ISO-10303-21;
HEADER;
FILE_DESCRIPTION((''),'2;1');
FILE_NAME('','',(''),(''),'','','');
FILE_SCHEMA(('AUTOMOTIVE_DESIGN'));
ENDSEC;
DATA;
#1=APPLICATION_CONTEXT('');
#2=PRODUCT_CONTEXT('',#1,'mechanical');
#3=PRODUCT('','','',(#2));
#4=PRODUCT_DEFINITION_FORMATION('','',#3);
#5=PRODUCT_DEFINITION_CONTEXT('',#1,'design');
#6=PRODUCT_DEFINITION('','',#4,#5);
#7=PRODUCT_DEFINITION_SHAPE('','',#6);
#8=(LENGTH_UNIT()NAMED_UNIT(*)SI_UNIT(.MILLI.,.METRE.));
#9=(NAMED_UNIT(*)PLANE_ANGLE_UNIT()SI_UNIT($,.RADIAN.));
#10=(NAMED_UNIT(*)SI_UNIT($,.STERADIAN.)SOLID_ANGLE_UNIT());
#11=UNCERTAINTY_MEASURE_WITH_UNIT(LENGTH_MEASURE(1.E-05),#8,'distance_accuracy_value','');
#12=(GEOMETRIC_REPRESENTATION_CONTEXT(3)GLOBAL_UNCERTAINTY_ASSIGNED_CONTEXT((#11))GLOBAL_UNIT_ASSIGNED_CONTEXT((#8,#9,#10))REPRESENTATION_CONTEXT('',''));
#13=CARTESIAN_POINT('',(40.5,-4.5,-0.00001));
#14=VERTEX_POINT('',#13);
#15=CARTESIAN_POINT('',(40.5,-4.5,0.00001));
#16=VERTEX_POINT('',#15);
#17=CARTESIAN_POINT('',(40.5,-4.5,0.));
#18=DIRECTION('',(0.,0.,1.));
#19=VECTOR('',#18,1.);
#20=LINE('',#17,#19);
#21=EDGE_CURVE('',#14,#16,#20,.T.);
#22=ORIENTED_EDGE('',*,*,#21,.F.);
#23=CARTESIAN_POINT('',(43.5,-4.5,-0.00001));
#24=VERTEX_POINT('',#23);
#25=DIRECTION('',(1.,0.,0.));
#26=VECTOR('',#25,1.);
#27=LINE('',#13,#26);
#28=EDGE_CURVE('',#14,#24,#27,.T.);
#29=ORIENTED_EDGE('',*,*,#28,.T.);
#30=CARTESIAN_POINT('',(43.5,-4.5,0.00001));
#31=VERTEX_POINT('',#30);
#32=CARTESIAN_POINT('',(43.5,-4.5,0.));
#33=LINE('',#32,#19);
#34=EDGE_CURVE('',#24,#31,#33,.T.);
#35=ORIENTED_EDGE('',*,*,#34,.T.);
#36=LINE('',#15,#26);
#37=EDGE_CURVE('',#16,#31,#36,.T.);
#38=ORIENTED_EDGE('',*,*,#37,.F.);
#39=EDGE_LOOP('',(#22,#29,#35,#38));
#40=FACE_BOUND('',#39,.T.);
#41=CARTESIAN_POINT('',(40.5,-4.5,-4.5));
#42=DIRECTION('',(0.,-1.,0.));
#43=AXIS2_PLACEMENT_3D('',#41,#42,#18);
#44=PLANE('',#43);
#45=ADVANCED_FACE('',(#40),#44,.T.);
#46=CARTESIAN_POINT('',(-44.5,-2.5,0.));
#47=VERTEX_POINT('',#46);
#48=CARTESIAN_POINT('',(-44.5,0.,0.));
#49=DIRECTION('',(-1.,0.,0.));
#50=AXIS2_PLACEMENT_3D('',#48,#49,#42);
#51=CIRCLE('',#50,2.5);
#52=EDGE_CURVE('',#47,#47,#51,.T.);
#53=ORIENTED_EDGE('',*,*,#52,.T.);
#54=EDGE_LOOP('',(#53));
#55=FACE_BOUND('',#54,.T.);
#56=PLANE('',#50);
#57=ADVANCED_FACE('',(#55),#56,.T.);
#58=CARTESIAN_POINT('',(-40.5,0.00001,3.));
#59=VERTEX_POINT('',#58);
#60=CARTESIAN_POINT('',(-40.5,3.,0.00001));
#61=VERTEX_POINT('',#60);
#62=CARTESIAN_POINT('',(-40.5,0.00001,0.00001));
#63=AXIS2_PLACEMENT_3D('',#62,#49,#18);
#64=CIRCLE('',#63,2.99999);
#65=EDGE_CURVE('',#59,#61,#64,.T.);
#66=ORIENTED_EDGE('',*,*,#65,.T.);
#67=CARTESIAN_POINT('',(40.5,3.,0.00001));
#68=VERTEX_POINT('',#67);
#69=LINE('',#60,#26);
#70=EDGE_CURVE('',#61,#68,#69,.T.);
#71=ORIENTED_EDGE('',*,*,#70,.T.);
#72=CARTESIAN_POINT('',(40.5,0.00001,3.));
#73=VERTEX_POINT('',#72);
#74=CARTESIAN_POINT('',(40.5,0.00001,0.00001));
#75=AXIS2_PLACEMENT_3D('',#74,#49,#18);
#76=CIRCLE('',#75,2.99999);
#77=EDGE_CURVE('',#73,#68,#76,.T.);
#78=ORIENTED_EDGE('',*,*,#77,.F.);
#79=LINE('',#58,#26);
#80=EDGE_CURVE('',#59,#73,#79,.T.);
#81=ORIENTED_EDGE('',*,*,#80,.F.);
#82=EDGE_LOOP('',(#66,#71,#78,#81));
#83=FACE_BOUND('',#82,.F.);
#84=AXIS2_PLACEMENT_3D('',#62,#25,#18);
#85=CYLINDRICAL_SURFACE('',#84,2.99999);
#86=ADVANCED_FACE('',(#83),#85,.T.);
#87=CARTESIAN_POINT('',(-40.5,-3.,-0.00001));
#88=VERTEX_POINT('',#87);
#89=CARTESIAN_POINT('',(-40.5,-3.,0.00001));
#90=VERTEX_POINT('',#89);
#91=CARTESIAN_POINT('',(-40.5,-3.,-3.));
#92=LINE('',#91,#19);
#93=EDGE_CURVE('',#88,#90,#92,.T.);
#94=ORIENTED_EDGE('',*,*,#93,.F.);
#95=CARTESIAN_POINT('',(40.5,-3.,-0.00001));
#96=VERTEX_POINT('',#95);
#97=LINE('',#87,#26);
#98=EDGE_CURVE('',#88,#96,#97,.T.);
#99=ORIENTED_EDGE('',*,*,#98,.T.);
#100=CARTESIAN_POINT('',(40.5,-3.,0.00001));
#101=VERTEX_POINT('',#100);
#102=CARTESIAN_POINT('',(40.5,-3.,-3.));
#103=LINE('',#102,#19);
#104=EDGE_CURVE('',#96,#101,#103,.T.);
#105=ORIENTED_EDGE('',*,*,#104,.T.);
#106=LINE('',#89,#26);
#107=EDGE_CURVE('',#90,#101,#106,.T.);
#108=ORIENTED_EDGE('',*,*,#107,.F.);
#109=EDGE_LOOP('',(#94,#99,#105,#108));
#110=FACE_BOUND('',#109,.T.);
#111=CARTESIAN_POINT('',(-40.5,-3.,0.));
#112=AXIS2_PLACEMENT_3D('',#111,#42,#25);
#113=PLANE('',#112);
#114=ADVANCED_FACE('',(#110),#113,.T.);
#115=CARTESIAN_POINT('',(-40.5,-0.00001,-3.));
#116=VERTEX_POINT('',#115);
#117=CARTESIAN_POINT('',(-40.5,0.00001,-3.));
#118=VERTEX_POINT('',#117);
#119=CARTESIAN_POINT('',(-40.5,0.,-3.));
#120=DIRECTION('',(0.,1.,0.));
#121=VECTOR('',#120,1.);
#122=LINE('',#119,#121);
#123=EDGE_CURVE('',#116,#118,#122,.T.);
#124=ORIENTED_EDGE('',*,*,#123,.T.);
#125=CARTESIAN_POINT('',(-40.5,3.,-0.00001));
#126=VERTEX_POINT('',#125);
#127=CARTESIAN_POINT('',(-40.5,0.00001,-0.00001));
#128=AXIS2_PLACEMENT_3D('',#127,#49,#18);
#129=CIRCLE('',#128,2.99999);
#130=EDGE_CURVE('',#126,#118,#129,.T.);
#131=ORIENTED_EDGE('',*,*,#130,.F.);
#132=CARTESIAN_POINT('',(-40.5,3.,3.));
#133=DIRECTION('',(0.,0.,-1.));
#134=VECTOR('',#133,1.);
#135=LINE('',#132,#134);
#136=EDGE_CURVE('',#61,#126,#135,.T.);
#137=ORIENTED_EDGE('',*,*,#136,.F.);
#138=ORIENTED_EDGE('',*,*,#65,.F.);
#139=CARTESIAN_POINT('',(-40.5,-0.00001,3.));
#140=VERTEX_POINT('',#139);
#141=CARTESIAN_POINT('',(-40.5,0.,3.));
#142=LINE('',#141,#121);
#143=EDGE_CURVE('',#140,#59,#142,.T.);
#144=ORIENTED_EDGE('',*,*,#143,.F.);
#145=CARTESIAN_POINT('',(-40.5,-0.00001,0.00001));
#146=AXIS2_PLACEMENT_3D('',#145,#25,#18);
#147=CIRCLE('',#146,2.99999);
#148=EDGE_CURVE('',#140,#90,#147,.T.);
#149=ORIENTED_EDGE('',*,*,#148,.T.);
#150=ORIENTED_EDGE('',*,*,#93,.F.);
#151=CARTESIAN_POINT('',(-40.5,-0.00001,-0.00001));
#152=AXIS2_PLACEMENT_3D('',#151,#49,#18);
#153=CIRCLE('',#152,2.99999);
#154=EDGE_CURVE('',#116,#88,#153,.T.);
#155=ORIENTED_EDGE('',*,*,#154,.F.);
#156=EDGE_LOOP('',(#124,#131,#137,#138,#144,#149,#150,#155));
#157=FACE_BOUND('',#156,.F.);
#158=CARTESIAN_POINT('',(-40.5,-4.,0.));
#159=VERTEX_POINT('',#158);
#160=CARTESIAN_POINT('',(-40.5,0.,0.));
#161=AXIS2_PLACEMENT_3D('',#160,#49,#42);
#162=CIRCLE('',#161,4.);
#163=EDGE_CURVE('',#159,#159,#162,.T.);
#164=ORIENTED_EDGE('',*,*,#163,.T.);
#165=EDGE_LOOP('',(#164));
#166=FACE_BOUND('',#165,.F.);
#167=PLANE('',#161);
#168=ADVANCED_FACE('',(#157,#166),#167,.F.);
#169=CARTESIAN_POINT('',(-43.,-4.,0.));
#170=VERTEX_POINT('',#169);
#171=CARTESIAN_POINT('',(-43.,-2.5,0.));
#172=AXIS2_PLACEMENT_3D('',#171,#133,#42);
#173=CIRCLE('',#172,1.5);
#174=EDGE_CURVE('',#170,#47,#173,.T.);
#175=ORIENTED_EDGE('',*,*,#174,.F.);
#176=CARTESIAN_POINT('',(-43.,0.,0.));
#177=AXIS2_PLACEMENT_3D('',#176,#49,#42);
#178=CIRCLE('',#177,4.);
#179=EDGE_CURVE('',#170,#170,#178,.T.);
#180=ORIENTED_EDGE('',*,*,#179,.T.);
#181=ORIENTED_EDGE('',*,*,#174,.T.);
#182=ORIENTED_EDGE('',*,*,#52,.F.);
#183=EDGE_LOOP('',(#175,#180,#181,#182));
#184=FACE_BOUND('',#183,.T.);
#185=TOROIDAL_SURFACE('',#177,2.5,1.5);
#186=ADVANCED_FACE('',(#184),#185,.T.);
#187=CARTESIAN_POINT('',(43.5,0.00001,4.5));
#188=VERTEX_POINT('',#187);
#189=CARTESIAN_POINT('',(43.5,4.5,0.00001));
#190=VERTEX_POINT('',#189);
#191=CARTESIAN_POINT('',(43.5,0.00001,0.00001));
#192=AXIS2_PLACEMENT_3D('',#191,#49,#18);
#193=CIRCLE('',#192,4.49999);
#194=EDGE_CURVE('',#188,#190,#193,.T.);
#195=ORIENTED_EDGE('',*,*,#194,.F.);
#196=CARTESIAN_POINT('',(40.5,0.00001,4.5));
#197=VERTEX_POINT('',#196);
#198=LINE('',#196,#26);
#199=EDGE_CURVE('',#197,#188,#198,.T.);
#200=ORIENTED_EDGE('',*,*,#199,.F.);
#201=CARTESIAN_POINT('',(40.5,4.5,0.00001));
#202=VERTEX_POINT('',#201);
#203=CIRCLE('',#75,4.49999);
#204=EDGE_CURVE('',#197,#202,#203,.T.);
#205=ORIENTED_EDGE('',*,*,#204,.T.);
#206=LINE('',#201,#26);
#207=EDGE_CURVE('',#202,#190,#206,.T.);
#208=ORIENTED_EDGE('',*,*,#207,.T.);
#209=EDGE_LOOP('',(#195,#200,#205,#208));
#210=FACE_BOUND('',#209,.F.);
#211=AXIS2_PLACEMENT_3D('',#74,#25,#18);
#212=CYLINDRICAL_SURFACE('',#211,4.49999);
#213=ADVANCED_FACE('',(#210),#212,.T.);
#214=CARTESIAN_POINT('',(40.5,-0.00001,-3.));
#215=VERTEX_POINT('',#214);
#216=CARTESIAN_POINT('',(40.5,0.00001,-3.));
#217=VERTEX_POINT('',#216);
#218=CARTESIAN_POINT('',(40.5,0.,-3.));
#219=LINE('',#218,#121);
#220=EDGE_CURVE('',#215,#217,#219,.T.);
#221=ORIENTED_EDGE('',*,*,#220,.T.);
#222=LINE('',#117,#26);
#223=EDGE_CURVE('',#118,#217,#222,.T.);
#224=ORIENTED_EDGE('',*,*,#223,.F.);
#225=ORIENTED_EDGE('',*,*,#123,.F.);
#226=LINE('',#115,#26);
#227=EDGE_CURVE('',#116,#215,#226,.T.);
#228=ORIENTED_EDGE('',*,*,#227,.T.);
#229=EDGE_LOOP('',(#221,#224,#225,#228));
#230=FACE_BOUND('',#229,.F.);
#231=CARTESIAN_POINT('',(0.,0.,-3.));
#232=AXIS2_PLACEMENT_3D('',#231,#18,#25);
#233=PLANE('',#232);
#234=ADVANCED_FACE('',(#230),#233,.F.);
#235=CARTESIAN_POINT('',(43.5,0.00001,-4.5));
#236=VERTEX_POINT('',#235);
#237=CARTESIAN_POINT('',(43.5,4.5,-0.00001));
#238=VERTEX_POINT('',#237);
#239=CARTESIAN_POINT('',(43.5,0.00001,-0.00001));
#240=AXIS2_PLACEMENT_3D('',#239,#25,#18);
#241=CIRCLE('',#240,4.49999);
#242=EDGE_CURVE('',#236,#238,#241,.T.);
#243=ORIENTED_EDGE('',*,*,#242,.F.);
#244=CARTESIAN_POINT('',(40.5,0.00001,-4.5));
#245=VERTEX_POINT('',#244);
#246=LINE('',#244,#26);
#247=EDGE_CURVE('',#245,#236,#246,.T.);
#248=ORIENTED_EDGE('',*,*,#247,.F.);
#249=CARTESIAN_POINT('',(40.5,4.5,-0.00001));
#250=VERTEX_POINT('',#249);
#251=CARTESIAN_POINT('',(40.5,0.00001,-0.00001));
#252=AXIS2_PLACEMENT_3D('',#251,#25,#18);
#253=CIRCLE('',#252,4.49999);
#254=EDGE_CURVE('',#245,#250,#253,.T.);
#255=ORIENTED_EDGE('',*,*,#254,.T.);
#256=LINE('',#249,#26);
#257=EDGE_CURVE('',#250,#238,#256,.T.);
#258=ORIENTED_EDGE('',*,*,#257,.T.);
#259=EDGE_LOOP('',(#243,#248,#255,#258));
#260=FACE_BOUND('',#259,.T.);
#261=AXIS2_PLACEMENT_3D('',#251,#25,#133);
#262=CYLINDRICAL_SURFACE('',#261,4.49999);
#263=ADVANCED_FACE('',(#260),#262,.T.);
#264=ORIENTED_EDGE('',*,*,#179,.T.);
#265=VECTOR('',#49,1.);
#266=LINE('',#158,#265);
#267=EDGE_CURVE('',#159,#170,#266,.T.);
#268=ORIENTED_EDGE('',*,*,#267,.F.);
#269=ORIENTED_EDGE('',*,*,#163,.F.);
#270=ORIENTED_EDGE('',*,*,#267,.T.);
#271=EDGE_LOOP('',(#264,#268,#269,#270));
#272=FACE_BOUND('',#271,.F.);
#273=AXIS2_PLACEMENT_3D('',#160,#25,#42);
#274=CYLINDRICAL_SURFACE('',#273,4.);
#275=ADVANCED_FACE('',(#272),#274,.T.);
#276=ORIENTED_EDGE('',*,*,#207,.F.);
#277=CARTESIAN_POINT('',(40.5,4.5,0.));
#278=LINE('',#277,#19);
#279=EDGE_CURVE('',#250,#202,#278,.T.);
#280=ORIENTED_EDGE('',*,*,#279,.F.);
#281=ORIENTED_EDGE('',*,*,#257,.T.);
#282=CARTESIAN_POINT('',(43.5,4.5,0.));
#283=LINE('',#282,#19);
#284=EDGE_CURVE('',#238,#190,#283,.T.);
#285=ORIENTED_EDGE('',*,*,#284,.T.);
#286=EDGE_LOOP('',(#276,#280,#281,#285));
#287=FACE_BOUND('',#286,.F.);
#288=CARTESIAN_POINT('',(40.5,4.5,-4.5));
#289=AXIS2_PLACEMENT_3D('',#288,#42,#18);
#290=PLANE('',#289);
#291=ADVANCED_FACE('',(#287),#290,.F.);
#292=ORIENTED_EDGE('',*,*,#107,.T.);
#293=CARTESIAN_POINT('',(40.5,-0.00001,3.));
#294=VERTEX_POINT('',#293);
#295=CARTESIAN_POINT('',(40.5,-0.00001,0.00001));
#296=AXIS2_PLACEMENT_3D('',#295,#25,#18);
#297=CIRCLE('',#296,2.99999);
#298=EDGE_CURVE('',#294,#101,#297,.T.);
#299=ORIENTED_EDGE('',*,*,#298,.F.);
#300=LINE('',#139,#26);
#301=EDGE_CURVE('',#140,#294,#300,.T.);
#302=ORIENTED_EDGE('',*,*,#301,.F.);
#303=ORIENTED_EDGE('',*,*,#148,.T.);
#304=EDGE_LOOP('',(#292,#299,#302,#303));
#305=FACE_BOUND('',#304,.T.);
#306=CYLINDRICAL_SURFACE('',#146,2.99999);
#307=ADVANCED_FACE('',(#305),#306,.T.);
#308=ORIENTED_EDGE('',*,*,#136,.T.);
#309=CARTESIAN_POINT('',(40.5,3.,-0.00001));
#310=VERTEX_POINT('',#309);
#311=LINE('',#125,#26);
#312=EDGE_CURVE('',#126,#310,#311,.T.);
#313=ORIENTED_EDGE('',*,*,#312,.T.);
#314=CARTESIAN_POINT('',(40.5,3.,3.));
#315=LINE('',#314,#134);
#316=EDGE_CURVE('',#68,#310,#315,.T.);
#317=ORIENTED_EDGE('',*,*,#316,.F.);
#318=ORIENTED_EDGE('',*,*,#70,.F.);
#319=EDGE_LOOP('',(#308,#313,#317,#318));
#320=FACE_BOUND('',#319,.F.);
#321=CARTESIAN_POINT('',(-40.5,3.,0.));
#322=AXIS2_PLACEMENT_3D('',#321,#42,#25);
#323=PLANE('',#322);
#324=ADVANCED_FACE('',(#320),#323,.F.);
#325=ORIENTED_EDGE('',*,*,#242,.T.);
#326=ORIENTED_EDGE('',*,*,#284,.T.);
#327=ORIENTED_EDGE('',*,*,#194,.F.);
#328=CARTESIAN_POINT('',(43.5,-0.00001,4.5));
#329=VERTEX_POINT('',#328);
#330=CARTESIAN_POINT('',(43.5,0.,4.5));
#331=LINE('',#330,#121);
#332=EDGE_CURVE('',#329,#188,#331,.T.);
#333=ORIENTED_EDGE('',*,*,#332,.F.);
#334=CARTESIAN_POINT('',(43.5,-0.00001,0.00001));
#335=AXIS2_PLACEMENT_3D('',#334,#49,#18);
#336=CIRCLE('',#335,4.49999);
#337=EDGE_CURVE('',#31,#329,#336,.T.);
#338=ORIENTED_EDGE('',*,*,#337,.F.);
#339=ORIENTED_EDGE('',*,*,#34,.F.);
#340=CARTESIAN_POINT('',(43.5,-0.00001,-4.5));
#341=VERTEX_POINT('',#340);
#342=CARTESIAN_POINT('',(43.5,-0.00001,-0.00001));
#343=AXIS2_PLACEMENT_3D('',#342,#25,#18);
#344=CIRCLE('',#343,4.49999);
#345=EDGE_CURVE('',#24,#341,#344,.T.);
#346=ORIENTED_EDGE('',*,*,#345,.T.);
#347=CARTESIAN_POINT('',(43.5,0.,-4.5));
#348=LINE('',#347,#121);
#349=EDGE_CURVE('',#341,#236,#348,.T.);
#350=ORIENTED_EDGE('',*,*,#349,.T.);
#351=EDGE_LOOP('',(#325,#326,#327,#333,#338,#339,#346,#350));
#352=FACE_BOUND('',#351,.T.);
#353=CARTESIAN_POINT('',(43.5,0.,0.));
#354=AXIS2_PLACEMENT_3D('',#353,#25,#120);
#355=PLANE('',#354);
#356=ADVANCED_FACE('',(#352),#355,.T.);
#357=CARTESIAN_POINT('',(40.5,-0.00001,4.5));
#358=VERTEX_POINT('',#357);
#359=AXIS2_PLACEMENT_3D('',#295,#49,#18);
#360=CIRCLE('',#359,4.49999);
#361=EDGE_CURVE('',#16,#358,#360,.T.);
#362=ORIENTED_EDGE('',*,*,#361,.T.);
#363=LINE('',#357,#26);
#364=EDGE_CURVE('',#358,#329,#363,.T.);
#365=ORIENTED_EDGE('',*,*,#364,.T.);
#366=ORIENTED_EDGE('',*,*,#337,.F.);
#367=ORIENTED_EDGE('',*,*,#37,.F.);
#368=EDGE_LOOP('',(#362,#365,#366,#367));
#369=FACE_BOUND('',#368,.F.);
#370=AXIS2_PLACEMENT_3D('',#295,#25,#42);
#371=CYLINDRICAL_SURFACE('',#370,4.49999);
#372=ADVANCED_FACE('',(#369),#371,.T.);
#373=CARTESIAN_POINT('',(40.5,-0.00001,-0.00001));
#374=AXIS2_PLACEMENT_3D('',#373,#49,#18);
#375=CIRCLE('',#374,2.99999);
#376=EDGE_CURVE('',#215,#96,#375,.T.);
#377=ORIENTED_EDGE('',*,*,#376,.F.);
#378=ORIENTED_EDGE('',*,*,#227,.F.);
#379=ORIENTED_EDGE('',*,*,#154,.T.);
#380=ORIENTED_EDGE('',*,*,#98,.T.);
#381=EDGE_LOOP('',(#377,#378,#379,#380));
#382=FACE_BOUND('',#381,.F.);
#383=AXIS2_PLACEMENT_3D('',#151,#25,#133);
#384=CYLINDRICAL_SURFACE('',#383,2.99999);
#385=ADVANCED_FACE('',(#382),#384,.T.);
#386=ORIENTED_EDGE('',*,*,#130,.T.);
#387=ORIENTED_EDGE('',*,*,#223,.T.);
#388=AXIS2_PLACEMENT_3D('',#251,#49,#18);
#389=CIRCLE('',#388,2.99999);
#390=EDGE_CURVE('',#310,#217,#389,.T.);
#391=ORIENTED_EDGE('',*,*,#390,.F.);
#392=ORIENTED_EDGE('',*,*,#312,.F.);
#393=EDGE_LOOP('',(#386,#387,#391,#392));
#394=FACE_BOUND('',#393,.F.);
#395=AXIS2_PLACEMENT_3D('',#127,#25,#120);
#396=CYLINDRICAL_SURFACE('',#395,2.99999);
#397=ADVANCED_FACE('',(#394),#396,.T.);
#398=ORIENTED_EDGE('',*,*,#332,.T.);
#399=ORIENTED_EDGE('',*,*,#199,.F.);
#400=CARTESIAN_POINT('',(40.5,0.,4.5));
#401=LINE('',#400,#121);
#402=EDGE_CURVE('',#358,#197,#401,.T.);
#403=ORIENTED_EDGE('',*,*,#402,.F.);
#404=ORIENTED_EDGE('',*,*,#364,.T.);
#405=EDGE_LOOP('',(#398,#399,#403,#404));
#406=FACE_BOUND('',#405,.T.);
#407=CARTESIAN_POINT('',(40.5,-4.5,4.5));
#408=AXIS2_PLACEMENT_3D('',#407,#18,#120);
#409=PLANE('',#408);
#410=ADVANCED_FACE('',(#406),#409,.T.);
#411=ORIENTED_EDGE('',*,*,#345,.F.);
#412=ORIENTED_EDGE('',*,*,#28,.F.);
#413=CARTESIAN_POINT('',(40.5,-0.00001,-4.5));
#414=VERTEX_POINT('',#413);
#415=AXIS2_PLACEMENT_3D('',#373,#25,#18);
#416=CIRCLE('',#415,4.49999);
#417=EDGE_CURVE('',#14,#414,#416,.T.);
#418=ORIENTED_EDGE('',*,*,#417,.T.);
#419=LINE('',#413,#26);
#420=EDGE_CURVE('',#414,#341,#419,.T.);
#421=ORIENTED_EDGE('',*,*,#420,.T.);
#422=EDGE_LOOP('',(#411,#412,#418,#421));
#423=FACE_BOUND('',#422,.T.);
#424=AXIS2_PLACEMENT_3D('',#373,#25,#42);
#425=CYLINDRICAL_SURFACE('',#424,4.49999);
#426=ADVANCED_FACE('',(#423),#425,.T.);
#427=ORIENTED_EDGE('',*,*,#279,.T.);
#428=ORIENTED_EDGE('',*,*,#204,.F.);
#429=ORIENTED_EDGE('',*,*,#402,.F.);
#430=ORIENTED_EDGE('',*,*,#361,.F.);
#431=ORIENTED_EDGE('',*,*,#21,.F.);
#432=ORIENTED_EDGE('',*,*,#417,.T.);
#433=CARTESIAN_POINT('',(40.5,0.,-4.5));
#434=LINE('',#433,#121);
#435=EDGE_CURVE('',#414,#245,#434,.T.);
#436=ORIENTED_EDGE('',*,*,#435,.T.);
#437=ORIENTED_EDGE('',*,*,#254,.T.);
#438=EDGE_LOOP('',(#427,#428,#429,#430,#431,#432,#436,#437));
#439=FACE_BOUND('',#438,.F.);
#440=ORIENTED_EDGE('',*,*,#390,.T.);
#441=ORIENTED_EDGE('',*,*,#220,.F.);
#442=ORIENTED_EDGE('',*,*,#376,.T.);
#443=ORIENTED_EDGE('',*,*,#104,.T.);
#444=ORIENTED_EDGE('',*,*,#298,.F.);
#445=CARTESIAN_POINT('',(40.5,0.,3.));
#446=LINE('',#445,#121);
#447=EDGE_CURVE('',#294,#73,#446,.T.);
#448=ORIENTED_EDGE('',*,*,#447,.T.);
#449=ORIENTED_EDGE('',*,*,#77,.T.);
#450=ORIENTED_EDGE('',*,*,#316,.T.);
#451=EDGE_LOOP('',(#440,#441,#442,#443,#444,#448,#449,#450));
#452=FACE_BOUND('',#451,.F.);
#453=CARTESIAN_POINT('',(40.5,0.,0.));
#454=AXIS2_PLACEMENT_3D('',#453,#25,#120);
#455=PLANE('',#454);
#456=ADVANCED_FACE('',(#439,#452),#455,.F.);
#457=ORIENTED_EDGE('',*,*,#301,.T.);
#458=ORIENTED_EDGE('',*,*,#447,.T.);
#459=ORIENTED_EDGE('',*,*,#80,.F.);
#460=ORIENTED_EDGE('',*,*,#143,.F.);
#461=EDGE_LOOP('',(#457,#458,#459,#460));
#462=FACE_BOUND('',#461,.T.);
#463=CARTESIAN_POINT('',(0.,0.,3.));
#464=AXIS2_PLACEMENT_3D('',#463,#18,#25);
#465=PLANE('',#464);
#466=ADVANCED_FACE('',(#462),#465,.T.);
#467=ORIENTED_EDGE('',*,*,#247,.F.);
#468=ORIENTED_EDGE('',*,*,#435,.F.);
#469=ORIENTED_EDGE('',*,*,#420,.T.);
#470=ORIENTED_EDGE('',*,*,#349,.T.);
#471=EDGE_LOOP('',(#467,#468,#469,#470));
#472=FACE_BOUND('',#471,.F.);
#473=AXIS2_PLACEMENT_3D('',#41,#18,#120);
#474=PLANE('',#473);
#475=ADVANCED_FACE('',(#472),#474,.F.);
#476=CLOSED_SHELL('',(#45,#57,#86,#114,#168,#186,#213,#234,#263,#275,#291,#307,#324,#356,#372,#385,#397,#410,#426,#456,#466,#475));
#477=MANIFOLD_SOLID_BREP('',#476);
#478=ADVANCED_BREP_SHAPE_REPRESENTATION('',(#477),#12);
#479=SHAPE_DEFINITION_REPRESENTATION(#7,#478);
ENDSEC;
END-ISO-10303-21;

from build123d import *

# Parameters (mm, degrees)
F0_W     = 81
F0_H     = 6
F1_DEPTH = 3
F3_R     = 2.99999
F2_W     = 9
F2_H     = 9
F2_W_2   = 6
F2_H_2   = 6
F4_DEPTH = 3
F5_R     = 4.49999
F6_R     = 4
F7_DEPTH = 4
F8_R     = 1.5


# Not quite as in the source:
# - a fillet or chamfer is up to 0.001 mm smaller than in the source, because OpenCascade refuses the exact size
# - ends of sketch curves that miss each other by under 0.0002 mm in the source are joined


with BuildPart() as f1:
    # F0 (on Top) → F1 (new body, symmetric)
    with BuildSketch(Plane.XY):
        Rectangle(F0_W, F0_H)
    extrude(amount=F1_DEPTH, both=True)

    # F3 (radius 3 in the source; OpenCascade refuses exactly that, so slightly less here)
    f3_edges = [f1.edges().sort_by_distance(p)[0] for p in [
        (0, -3, 3),
        (0, -3, -3),
        (0, 3, 3),
        (0, 3, -3),
    ]]
    fillet(f3_edges, radius=F3_R)

    # F2 (on face) → F4 (join)
    with BuildSketch(Plane.YZ.offset(40.5)):
        Rectangle(F2_W, F2_H)
        Rectangle(F2_W_2, F2_H_2, mode=Mode.SUBTRACT)
        Rectangle(F2_W_2, F2_H_2)
    extrude(amount=F4_DEPTH)

    # F5 (radius 4.5 in the source; OpenCascade refuses exactly that, so slightly less here)
    f5_edges = [f1.edges().sort_by_distance(p)[0] for p in [
        (42, 4.5, 4.5),
        (42, -4.5, 4.5),
        (42, -4.5, -4.5),
        (42, 4.5, -4.5),
    ]]
    fillet(f5_edges, radius=F5_R)

    # F6 (on face) → F7 (join)
    with BuildSketch(Plane(origin=(-40.5, 0, 0), x_dir=(0, -1, 0), z_dir=(-1, 0, 0))):
        Circle(F6_R)
        with BuildLine():
            ThreePointArc((-1e-05, -3), (-2.1213232725, -2.1213232725), (-3, -1e-05))
            ThreePointArc((-3, -1e-05), (-2.1213232725, 2.1213232725), (-1e-05, 3))
            ThreePointArc((-1e-05, 3), (2.1213232725, 2.1213232725), (3, 1e-05))
            ThreePointArc((3, 1e-05), (2.1213232725, -2.1213232725), (-1e-05, -3))
        make_face(mode=Mode.SUBTRACT)
        with BuildLine():
            ThreePointArc((-1e-05, 3), (-2.1213232725, 2.1213232725), (-3, 1e-05))
            ThreePointArc((-3, 1e-05), (-2.1213232725, -2.1213232725), (-1e-05, -3))
            ThreePointArc((-1e-05, -3), (2.1213232725, -2.1213232725), (3, -1e-05))
            ThreePointArc((3, -1e-05), (2.1213232725, 2.1213232725), (-1e-05, 3))
        make_face()
    extrude(amount=F7_DEPTH)

    # F8
    f8_edges = [f1.edges().sort_by_distance(p)[0] for p in [
        (-44.5, 4, 0),
    ]]
    fillet(f8_edges, radius=F8_R)


solid = f1.part
